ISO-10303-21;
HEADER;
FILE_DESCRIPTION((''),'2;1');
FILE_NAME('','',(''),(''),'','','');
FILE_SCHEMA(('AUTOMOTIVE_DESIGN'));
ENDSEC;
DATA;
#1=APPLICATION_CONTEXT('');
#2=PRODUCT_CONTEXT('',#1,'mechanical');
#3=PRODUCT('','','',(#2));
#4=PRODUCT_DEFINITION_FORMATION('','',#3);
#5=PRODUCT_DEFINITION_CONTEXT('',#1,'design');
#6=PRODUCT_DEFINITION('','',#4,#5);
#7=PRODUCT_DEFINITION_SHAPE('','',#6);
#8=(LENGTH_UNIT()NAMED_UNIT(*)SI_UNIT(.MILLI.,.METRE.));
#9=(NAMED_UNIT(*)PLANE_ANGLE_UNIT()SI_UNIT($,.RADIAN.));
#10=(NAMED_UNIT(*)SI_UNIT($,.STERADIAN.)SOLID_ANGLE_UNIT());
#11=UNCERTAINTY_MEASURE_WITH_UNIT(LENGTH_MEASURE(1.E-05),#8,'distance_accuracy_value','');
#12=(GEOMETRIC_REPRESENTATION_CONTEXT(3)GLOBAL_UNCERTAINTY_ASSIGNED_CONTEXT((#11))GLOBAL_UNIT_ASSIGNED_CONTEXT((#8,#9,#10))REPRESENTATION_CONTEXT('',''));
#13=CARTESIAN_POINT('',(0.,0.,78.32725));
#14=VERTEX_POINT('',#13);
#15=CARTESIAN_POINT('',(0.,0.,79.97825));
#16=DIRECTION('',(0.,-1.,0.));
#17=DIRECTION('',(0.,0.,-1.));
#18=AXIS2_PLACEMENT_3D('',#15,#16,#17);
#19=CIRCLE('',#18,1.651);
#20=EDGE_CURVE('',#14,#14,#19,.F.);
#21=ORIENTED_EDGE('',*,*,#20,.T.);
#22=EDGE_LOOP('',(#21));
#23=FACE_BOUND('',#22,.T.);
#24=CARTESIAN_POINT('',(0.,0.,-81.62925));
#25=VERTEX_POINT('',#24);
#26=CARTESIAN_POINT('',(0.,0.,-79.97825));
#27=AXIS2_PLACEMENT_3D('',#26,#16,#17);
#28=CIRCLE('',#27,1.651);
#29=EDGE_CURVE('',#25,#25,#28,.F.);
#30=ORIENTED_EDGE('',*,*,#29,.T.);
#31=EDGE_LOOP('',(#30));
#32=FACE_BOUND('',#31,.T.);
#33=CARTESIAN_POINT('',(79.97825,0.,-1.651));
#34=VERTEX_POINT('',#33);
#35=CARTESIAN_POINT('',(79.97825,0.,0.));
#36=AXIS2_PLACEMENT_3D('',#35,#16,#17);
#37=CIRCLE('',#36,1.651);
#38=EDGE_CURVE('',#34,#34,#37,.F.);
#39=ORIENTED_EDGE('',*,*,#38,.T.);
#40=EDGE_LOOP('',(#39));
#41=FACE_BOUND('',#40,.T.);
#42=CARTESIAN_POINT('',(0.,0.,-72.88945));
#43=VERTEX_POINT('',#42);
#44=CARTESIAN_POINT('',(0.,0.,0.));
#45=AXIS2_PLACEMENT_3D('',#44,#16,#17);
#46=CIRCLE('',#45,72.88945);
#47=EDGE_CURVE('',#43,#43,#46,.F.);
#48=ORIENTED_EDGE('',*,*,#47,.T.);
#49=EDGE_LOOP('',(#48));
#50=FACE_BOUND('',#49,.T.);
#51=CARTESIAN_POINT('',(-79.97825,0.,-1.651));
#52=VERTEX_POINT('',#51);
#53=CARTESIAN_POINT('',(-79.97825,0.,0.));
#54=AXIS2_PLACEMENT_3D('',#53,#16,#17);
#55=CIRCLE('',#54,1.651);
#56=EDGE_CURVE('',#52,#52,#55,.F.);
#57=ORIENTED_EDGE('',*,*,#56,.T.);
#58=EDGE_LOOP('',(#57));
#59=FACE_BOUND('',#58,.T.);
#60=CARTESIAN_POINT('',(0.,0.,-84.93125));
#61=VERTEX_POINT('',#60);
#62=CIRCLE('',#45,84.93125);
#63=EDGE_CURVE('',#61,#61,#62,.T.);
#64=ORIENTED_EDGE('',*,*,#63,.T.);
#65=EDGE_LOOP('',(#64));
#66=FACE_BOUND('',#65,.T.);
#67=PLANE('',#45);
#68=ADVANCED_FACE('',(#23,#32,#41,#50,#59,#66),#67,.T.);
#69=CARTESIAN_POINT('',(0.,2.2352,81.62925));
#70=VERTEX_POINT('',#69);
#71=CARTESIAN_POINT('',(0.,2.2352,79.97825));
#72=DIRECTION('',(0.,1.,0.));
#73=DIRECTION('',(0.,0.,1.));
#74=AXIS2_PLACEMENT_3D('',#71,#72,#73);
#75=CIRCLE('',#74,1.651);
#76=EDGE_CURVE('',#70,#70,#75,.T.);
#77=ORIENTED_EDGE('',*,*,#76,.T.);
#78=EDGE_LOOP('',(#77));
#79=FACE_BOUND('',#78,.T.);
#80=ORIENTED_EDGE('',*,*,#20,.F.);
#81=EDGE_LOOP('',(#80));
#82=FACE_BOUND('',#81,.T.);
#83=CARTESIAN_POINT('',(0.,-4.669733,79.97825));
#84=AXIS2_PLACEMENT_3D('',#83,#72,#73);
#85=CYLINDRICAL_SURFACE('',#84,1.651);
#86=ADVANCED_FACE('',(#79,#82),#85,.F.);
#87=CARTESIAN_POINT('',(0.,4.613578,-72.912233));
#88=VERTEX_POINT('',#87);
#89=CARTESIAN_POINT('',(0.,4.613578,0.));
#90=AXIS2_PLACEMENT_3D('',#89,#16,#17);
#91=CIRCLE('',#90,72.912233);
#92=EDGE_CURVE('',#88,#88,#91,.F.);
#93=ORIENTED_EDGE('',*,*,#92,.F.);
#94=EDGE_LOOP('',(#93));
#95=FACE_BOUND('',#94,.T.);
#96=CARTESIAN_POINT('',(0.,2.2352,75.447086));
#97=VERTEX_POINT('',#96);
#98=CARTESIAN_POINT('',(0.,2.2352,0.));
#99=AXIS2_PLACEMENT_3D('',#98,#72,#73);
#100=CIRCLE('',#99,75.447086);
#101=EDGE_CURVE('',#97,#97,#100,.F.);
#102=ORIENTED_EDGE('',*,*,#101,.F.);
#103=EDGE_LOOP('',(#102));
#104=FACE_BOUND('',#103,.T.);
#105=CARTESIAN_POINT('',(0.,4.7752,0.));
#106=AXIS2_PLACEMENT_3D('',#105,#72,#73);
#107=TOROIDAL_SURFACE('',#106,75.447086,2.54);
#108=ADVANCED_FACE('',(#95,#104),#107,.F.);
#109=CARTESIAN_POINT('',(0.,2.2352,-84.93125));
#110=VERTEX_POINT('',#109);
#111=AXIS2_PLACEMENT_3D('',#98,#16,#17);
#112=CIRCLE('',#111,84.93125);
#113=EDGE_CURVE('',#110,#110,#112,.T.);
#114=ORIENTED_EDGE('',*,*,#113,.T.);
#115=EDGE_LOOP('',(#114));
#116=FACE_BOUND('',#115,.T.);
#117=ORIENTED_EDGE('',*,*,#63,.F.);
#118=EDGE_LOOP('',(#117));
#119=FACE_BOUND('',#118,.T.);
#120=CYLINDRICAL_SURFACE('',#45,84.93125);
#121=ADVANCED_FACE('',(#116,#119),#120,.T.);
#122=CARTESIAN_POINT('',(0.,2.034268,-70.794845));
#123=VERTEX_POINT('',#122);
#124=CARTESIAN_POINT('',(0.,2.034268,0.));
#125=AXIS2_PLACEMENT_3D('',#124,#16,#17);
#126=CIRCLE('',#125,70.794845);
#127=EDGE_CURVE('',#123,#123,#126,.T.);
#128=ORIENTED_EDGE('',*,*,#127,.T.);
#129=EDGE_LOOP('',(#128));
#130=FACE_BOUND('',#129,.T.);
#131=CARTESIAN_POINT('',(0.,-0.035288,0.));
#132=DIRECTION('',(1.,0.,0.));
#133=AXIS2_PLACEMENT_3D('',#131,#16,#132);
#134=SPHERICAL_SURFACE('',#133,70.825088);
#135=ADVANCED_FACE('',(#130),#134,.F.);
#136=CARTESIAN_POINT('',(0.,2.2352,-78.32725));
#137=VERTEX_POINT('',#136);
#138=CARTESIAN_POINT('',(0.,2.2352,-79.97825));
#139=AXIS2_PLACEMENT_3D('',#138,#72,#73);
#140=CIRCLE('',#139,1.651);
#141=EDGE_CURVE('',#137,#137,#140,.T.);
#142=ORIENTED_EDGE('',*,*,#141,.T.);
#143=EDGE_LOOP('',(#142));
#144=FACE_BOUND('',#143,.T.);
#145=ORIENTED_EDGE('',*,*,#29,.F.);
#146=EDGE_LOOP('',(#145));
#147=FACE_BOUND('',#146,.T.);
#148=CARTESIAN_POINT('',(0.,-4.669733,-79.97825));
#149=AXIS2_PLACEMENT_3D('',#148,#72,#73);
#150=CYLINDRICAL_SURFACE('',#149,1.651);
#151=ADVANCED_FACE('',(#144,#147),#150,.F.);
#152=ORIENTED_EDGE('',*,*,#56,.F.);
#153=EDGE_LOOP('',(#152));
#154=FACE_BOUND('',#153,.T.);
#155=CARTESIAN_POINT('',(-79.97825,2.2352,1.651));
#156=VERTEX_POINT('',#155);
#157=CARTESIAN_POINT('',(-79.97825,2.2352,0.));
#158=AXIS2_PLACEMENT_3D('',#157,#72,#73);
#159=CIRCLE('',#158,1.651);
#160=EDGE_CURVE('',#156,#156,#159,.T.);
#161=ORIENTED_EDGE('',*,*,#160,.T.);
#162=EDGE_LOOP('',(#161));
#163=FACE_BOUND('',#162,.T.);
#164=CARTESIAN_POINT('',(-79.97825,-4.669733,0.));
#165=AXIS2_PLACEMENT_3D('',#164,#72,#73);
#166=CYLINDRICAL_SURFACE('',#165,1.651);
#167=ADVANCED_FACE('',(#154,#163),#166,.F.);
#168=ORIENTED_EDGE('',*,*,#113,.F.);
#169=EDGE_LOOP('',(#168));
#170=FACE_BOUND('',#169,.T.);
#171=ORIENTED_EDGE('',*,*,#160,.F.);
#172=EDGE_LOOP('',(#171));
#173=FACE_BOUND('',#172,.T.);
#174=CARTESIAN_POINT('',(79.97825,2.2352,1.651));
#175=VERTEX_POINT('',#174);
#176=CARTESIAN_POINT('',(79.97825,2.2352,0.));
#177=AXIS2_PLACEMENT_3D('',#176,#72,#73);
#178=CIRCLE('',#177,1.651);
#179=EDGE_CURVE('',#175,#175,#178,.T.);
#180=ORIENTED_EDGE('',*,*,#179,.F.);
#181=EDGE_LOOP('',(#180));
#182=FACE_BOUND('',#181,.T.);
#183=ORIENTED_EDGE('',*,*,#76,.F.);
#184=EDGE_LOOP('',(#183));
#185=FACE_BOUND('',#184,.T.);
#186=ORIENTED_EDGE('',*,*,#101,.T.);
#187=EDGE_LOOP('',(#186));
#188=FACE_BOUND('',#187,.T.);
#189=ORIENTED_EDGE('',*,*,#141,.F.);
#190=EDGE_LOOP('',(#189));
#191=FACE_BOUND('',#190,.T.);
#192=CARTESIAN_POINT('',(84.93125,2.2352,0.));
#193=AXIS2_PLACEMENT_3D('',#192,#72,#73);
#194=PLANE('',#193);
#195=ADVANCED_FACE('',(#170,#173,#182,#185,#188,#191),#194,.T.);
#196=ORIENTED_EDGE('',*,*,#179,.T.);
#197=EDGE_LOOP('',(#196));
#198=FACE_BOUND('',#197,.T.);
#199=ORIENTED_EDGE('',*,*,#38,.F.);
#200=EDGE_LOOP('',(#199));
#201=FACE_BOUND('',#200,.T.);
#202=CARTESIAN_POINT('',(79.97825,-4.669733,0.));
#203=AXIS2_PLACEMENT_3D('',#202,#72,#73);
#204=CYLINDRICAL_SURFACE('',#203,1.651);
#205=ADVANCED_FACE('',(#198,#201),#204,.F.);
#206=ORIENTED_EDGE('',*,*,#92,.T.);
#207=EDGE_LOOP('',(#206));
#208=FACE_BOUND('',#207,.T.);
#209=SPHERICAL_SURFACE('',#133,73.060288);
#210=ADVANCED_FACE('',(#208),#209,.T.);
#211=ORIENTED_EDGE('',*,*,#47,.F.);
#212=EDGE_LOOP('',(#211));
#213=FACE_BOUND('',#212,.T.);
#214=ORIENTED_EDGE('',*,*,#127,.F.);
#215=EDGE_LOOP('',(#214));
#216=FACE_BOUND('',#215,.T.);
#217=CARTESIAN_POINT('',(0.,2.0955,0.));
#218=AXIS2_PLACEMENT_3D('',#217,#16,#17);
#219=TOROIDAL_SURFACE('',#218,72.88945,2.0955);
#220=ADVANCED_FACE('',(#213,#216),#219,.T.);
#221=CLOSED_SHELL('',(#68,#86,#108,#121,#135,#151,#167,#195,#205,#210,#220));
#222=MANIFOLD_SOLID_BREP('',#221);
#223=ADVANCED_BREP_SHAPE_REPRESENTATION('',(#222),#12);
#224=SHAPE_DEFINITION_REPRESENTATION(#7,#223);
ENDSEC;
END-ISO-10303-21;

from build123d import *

# Parameters (mm, degrees)
SKETCH2_R        = 1.651
DOME_HOLES_DEPTH = 2.2352
FILLET1_R        = 2.0955
FILLET2_R        = 2.54


# Read off the part's stored shape, not the designer's step: Shell1
with BuildPart() as part:
    # Sketch1 → Revolve1 (revolve)
    with BuildSketch(Plane.XY):
        with BuildLine():
            Line((0, 0), (0, 73.025))
            ThreePointArc((0, 73.025), (50.852351, 52.42273424), (73.025, 2.2352))
            Line((73.025, 2.2352), (84.93125, 2.2352))
            Line((84.93125, 2.2352), (84.93125, 0))
            Line((84.93125, 0), (0, 0))
        make_face()
    revolve(axis=Axis((0, 0, 0), (0, 1, 0)))

    # Shell1 outline → Shell1 (revolve, cut)
    with BuildSketch(Plane.XY):
        with BuildLine():
            Line((0, -7.1e-08), (70.825079619, -7.1e-08))
            ThreePointArc((70.825079619, -7.1e-08), (50.068422427, 50.058086641), (0, 70.7898))
            Line((0, 70.7898), (0, -7.1e-08))
        make_face()
    revolve(axis=Axis((0, 0, 0), (0, 1, 0)), mode=Mode.SUBTRACT)

    # Sketch2 → Dome Holes (cut)
    with BuildSketch(Plane(origin=(0, 2.2352, 0), x_dir=(1, 0, 0), z_dir=(0, 1, 0))):
        with Locations(Location((0, 79.97825, 0), (0, 0, 270))):
            Circle(SKETCH2_R)
        with Locations(Location((79.97825, 0, 0), (0, 0, 270))):
            Circle(SKETCH2_R)
        with Locations(Location((0, -79.97825, 0), (0, 0, 270))):
            Circle(SKETCH2_R)
        with Locations(Location((-79.97825, 0, 0), (0, 0, 270))):
            Circle(SKETCH2_R)
    extrude(amount=-DOME_HOLES_DEPTH, mode=Mode.SUBTRACT)

    # Fillet1
    fillet1_edges = [part.edges().sort_by_distance(p)[0] for p in [
        (-70.825079619, -7.1e-08, 0),
    ]]
    fillet(fillet1_edges, radius=FILLET1_R)

    # Fillet2
    fillet2_edges = [part.edges().sort_by_distance(p)[0] for p in [
        (-73.025, 2.2352, 0),
    ]]
    fillet(fillet2_edges, radius=FILLET2_R)


solid = part.part
